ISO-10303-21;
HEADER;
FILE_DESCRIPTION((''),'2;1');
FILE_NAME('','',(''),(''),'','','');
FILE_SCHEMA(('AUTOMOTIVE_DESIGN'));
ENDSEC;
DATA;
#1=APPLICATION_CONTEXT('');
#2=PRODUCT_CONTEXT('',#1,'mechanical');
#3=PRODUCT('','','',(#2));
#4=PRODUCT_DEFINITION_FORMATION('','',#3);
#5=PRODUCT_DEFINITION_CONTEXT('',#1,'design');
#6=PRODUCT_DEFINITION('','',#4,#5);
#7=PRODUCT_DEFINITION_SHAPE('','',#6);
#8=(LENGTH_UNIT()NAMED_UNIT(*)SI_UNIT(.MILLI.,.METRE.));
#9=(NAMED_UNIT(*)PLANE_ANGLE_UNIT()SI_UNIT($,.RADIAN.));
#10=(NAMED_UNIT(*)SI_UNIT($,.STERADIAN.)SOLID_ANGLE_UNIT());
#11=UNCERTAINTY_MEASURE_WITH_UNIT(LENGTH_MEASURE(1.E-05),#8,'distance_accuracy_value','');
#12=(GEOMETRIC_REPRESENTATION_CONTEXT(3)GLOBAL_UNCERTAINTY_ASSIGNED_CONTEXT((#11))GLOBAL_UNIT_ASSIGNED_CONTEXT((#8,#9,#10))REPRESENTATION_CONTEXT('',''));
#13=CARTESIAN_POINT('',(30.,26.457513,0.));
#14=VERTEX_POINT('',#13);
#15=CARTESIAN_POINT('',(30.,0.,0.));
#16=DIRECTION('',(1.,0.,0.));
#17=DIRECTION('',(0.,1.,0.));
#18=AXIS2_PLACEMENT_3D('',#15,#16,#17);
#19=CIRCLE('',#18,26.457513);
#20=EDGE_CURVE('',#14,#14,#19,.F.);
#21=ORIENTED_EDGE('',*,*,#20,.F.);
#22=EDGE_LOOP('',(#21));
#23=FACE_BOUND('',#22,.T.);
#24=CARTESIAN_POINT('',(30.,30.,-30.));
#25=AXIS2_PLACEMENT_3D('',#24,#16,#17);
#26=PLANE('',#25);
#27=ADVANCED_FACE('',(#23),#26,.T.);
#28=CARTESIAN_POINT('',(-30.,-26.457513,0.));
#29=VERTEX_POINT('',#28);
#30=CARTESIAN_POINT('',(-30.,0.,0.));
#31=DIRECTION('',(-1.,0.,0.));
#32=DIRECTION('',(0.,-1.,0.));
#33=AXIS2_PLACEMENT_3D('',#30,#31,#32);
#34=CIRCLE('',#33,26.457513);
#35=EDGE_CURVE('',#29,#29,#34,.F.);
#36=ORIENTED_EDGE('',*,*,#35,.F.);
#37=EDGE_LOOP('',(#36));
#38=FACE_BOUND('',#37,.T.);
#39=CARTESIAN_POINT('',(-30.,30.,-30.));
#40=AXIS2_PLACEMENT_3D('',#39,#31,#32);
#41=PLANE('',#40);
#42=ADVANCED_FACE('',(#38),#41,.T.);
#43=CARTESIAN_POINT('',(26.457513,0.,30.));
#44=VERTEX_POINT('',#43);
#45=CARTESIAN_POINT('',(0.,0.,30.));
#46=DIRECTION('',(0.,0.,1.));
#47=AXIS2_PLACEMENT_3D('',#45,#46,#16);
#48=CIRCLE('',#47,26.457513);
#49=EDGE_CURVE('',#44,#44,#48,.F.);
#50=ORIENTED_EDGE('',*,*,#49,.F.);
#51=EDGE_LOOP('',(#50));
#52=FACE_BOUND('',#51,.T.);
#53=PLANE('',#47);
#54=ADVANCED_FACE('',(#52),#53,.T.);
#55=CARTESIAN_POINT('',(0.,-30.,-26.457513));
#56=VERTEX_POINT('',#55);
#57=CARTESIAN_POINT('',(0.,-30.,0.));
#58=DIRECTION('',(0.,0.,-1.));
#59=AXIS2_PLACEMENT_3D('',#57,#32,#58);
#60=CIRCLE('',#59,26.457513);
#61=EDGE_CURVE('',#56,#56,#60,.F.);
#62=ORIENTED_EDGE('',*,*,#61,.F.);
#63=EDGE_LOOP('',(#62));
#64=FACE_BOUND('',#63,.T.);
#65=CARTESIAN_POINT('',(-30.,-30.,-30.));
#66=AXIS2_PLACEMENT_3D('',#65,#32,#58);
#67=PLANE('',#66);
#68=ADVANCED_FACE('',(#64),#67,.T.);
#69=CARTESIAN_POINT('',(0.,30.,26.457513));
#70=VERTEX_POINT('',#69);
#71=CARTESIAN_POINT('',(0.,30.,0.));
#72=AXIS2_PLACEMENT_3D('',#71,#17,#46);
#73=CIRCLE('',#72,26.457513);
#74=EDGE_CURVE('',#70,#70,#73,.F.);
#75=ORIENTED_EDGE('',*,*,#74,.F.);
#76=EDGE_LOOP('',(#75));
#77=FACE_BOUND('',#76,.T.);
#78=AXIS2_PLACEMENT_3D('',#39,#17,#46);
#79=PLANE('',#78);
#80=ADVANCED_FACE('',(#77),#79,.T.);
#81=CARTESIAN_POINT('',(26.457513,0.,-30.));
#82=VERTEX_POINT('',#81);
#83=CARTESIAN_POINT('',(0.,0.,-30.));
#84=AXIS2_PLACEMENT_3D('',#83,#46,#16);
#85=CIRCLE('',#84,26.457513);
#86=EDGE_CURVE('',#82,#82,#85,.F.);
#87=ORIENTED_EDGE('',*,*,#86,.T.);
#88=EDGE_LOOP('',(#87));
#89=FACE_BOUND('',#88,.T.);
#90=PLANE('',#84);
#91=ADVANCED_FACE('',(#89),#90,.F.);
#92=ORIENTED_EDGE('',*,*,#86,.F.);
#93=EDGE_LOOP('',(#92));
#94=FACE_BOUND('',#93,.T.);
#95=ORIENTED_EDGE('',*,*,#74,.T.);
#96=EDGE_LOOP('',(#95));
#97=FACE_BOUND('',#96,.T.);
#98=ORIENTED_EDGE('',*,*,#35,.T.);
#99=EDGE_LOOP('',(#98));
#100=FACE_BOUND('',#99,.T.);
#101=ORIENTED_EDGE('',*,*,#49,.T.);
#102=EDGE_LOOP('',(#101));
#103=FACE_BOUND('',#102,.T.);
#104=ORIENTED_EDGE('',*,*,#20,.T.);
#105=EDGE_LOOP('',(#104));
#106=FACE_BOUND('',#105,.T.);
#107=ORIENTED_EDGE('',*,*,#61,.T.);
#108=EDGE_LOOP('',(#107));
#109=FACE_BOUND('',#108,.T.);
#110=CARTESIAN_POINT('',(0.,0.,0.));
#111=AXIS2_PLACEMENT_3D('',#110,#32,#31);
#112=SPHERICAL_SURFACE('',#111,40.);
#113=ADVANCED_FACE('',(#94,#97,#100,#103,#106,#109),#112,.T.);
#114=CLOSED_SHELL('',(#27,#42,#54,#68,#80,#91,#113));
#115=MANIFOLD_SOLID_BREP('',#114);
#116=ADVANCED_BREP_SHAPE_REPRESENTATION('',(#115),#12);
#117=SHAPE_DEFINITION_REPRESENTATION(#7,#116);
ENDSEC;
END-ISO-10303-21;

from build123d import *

# Parameters (mm, degrees)
P_IDAT_VYSUNUT_M1_DEPTH      = 30
P_IDAT_VYSUNUT_M1_DEPTH_BACK = 30
SKICA2_W                     = 60
SKICA2_H                     = 60


with BuildPart() as part:
    # Skica1 → Rotovat1 (revolve)
    with BuildSketch(Plane.XY):
        with BuildLine():
            Line((0, -40), (0, 40))
            ThreePointArc((0, 40), (40, 0), (0, -40))
        make_face()
    revolve(axis=Axis((0, -40, 0), (0, 1, 0)))


with BuildPart() as body_2:
    # Skica2 → Přidat vysunutím1 (new, two sides: drawn at the far end of the back side and taken through both)
    with BuildSketch(Plane.XY.offset(-P_IDAT_VYSUNUT_M1_DEPTH_BACK)):
        Rectangle(SKICA2_W, SKICA2_H)
    extrude(amount=P_IDAT_VYSUNUT_M1_DEPTH + P_IDAT_VYSUNUT_M1_DEPTH_BACK)


with BuildPart() as part_1:
    add(part.part)

    # Průsečík3: read off the stored shape, not the designer's step
    # Průsečík3: intersect body 2
    add(body_2.part, mode=Mode.INTERSECT)


solid = part_1.part
